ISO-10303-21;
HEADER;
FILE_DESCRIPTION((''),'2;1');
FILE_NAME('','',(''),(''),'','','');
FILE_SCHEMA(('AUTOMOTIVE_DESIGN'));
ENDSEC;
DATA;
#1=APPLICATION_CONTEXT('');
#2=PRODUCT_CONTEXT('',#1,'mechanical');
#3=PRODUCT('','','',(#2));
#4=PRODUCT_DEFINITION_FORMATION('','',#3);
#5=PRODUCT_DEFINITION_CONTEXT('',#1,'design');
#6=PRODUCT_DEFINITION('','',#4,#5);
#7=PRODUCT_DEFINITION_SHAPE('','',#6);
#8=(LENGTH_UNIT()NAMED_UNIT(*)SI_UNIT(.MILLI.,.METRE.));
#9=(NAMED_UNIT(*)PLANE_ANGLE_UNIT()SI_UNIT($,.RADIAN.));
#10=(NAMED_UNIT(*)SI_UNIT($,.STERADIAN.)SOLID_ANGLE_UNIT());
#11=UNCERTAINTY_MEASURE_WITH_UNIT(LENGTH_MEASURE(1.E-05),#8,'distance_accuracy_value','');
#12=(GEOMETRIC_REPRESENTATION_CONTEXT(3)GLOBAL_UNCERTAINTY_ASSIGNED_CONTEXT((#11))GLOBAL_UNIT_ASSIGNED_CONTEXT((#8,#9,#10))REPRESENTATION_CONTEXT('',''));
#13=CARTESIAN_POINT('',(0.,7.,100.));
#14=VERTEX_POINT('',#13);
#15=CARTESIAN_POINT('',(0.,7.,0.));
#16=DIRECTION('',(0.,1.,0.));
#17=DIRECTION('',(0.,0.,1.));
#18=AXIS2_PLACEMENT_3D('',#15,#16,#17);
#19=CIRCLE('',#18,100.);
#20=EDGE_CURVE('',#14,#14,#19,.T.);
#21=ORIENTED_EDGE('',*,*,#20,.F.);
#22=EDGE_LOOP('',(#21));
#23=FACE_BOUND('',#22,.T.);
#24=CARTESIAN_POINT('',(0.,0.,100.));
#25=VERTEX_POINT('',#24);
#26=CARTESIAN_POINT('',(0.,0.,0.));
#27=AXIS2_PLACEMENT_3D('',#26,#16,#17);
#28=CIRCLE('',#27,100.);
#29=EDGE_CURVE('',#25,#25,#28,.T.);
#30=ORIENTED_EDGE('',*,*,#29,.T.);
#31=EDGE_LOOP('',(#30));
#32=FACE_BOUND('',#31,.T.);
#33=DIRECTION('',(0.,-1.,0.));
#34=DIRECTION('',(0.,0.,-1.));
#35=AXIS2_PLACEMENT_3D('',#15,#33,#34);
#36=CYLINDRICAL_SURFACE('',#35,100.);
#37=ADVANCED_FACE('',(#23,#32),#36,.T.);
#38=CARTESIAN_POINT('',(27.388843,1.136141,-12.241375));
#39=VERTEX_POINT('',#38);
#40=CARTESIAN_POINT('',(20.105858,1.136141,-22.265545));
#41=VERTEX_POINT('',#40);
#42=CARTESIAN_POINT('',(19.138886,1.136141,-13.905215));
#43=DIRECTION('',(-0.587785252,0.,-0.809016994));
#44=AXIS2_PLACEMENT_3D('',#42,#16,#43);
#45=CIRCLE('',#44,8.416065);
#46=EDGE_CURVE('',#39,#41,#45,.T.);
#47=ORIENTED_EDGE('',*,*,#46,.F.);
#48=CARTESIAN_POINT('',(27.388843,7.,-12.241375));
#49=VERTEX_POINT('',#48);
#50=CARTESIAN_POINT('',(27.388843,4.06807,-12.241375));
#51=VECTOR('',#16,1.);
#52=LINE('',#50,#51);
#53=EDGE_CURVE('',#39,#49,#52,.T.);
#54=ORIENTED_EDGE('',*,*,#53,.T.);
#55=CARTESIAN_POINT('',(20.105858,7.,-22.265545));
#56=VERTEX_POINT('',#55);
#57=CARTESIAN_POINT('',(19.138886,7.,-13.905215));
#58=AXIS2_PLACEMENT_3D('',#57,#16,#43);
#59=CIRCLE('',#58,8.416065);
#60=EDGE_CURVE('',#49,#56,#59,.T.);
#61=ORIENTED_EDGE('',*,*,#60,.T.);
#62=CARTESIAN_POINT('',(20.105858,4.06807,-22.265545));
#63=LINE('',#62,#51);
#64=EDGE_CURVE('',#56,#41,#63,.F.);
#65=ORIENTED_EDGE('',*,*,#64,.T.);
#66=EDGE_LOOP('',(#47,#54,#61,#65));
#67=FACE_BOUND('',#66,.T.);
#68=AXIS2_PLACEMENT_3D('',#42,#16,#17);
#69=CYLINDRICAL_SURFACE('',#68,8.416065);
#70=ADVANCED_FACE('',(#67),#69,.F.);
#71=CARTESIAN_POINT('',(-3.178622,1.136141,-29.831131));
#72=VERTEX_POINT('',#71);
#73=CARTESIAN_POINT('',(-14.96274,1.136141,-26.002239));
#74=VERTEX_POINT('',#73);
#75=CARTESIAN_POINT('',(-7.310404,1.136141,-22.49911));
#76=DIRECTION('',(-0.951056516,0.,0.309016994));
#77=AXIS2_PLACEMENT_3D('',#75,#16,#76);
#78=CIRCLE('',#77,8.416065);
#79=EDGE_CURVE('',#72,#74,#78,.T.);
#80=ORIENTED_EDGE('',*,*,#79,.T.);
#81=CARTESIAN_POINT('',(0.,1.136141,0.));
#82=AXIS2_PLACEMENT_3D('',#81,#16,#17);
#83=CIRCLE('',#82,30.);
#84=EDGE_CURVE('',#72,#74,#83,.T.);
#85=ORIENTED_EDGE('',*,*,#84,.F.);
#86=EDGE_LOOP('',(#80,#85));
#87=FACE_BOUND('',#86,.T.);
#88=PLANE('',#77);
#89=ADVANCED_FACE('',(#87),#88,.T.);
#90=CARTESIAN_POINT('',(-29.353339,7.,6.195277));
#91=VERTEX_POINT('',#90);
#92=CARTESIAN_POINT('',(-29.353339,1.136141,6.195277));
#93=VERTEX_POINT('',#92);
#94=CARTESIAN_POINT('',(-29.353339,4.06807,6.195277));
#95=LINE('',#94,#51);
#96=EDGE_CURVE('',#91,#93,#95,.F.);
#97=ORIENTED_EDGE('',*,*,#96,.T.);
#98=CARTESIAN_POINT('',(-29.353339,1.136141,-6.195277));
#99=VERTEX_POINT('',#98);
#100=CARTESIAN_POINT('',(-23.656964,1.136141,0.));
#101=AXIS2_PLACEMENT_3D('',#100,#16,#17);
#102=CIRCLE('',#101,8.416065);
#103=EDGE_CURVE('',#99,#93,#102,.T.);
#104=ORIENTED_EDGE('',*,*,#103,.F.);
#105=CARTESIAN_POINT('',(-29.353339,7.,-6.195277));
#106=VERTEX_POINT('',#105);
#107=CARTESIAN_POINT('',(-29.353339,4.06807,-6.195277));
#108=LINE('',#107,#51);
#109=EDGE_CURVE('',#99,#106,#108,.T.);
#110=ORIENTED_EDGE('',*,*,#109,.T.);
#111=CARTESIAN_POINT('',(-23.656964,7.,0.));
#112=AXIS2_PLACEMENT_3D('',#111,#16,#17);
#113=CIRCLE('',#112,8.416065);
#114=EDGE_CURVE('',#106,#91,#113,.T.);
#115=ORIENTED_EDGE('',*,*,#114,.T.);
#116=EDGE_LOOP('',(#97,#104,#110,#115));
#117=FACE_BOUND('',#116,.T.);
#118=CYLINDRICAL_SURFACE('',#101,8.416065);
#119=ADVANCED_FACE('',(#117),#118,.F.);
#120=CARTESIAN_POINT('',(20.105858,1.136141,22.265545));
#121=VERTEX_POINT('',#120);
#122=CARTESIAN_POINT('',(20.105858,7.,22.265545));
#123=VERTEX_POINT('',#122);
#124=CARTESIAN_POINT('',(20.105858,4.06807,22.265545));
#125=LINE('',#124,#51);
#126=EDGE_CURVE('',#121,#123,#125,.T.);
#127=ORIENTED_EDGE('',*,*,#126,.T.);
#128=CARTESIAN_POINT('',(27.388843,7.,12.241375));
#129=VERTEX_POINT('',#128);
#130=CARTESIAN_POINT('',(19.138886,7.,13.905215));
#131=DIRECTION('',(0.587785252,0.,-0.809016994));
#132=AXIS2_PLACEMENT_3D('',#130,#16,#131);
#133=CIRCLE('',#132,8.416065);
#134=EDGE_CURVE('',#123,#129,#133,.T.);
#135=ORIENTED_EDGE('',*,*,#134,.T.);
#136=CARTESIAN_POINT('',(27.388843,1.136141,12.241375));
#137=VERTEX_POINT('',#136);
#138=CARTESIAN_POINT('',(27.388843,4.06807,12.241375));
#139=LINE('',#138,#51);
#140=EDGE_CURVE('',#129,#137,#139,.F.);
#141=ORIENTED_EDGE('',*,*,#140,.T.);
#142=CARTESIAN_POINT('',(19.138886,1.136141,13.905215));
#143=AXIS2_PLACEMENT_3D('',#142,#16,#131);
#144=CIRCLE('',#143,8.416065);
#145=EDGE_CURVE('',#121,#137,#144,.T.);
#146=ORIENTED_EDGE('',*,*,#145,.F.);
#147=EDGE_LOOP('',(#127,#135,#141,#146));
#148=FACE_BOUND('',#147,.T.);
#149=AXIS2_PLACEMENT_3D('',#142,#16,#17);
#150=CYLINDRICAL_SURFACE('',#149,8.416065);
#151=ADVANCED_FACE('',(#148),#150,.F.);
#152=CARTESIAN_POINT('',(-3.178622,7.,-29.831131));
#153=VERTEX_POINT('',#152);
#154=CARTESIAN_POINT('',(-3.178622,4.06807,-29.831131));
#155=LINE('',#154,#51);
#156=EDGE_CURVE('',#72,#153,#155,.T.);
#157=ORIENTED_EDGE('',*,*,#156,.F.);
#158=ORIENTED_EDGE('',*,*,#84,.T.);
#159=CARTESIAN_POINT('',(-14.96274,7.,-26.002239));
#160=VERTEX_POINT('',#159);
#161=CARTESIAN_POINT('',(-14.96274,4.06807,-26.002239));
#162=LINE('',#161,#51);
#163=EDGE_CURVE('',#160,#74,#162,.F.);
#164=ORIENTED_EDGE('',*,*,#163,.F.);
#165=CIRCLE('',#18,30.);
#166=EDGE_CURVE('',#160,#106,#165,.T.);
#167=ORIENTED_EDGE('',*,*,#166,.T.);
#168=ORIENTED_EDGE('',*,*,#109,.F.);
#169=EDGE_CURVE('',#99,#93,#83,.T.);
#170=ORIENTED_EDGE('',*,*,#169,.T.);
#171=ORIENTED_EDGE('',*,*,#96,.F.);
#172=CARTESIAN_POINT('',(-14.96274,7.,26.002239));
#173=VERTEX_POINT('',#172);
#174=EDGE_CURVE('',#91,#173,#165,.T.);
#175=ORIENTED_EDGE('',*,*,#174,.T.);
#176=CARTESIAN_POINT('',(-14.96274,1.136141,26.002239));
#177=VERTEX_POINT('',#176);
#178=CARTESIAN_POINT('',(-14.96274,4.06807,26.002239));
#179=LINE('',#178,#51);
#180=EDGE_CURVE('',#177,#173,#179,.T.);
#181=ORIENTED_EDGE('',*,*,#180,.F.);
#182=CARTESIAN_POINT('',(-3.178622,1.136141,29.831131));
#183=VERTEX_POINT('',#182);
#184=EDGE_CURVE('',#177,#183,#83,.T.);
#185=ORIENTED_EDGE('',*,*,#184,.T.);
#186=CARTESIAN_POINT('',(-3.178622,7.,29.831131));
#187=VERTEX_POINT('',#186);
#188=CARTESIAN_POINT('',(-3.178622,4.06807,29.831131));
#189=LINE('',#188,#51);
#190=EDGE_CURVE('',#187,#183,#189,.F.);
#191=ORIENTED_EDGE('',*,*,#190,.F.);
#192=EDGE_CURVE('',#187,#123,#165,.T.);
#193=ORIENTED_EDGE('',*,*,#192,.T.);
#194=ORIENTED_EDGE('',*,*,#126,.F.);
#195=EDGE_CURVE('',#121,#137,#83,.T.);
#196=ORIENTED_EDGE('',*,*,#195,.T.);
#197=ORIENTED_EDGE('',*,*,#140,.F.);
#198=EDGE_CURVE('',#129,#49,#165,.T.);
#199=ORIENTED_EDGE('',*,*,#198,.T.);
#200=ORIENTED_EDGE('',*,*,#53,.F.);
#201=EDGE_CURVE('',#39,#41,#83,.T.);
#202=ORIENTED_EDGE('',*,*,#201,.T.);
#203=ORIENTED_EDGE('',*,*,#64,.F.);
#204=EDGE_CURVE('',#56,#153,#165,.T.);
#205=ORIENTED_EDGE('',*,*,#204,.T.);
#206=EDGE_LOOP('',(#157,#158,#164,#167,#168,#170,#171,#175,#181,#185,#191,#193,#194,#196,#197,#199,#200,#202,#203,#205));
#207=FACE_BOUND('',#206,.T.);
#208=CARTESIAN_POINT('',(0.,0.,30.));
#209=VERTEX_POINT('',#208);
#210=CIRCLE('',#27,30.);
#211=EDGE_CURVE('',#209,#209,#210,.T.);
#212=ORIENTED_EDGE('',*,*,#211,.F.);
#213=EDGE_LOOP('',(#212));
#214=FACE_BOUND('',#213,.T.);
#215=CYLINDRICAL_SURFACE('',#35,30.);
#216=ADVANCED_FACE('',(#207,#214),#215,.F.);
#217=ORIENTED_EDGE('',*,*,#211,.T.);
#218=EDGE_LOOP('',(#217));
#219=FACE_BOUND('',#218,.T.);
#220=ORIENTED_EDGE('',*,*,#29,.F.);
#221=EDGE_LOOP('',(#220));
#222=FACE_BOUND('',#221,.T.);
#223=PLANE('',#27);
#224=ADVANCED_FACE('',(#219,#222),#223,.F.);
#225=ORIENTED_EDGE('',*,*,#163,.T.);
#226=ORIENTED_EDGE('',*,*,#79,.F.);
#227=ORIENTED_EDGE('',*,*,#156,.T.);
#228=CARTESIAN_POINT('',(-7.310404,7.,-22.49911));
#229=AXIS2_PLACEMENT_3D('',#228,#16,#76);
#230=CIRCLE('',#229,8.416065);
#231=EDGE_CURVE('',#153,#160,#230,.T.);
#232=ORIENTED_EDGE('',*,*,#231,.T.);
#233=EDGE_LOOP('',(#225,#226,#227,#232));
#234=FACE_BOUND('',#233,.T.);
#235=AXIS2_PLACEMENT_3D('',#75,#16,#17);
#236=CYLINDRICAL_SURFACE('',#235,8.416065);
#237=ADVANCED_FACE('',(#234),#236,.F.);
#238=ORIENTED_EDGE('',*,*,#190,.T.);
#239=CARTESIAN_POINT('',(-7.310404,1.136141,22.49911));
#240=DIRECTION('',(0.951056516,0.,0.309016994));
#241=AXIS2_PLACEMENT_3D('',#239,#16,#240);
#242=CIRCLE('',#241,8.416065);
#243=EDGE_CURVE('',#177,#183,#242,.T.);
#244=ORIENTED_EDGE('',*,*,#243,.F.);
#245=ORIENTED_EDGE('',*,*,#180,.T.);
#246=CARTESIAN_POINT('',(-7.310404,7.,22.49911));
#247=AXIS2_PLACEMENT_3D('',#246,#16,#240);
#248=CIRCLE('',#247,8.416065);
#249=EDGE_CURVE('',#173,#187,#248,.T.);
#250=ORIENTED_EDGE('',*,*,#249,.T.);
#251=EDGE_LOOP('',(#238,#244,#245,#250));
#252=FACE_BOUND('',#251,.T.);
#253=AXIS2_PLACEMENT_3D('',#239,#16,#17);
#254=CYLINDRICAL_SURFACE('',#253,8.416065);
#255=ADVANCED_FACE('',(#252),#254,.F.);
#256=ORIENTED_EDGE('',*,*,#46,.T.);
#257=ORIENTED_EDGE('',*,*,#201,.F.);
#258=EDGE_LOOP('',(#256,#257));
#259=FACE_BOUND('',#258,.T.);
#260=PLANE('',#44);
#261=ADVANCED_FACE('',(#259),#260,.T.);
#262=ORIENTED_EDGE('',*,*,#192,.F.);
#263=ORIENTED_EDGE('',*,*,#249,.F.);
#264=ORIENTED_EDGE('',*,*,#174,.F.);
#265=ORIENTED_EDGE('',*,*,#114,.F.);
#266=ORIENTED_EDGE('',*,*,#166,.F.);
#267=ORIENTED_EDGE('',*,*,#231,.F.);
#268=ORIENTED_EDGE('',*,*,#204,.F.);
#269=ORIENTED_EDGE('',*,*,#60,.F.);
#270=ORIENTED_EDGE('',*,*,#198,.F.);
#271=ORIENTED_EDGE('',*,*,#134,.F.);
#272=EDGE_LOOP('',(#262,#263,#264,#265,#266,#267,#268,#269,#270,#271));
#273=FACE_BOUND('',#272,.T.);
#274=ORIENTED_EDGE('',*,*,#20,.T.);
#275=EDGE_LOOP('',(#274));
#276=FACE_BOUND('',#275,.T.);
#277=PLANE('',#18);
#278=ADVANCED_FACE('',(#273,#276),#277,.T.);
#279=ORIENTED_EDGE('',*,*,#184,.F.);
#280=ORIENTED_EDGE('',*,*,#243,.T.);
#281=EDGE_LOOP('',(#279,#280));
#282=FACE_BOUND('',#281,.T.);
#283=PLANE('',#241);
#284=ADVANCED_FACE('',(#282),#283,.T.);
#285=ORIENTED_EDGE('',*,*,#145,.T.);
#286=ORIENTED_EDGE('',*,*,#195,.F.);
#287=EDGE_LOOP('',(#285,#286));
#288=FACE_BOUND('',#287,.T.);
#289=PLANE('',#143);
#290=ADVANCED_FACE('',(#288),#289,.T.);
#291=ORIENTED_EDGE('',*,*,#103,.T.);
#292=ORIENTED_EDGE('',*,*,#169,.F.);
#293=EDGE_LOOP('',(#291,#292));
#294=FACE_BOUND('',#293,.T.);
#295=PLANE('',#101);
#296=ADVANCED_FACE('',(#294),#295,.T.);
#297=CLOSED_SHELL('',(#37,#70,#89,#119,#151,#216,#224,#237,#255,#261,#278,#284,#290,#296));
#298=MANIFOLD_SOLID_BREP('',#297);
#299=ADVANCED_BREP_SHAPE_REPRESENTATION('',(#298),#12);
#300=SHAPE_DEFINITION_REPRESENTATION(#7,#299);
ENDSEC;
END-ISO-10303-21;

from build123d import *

# Parameters (mm, degrees)
SKETCH1_R           = 100
BOSS_EXTRUDE1_DEPTH = 7
SKETCH2_R           = 30
CUT_EXTRUDE1_DEPTH  = 142.594491418
SKETCH3_R           = 8.416065229
CUT_EXTRUDE2_DEPTH  = 5.863859483
CIRPATTERN1_COUNT   = 5


with BuildPart() as part:
    # Sketch1 → Boss-Extrude1 (new body)
    with BuildSketch(Plane(origin=(0, 0, 0), x_dir=(1, 0, 0), z_dir=(0, 1, 0))):
        Circle(SKETCH1_R)
    extrude(amount=BOSS_EXTRUDE1_DEPTH)

    # Sketch2 → Cut-Extrude1 (cut, through all)
    with BuildSketch(Plane(origin=(0, 0, 0), x_dir=(1, 0, 0), z_dir=(0, 1, 0))):
        Circle(SKETCH2_R)
    extrude(amount=CUT_EXTRUDE1_DEPTH, mode=Mode.SUBTRACT)

    # Sketch3 → Cut-Extrude2 (cut)
    with BuildSketch(Plane(origin=(0, 7, 0), x_dir=(1, 0, 0), z_dir=(0, 1, 0))):
        with Locations((-23.656964021, 0)):
            Circle(SKETCH3_R)
    cut_extrude2 = extrude(amount=-CUT_EXTRUDE2_DEPTH, mode=Mode.SUBTRACT)

    # CirPattern1: Cut-Extrude2 ×5 about axis
    cirpattern1_axis = Axis((0, 0, 0), (0, 1, 0))
    for i in range(1, CIRPATTERN1_COUNT):
        add(cut_extrude2.rotate(cirpattern1_axis, i * 360 / CIRPATTERN1_COUNT), mode=Mode.SUBTRACT)


solid = part.part
